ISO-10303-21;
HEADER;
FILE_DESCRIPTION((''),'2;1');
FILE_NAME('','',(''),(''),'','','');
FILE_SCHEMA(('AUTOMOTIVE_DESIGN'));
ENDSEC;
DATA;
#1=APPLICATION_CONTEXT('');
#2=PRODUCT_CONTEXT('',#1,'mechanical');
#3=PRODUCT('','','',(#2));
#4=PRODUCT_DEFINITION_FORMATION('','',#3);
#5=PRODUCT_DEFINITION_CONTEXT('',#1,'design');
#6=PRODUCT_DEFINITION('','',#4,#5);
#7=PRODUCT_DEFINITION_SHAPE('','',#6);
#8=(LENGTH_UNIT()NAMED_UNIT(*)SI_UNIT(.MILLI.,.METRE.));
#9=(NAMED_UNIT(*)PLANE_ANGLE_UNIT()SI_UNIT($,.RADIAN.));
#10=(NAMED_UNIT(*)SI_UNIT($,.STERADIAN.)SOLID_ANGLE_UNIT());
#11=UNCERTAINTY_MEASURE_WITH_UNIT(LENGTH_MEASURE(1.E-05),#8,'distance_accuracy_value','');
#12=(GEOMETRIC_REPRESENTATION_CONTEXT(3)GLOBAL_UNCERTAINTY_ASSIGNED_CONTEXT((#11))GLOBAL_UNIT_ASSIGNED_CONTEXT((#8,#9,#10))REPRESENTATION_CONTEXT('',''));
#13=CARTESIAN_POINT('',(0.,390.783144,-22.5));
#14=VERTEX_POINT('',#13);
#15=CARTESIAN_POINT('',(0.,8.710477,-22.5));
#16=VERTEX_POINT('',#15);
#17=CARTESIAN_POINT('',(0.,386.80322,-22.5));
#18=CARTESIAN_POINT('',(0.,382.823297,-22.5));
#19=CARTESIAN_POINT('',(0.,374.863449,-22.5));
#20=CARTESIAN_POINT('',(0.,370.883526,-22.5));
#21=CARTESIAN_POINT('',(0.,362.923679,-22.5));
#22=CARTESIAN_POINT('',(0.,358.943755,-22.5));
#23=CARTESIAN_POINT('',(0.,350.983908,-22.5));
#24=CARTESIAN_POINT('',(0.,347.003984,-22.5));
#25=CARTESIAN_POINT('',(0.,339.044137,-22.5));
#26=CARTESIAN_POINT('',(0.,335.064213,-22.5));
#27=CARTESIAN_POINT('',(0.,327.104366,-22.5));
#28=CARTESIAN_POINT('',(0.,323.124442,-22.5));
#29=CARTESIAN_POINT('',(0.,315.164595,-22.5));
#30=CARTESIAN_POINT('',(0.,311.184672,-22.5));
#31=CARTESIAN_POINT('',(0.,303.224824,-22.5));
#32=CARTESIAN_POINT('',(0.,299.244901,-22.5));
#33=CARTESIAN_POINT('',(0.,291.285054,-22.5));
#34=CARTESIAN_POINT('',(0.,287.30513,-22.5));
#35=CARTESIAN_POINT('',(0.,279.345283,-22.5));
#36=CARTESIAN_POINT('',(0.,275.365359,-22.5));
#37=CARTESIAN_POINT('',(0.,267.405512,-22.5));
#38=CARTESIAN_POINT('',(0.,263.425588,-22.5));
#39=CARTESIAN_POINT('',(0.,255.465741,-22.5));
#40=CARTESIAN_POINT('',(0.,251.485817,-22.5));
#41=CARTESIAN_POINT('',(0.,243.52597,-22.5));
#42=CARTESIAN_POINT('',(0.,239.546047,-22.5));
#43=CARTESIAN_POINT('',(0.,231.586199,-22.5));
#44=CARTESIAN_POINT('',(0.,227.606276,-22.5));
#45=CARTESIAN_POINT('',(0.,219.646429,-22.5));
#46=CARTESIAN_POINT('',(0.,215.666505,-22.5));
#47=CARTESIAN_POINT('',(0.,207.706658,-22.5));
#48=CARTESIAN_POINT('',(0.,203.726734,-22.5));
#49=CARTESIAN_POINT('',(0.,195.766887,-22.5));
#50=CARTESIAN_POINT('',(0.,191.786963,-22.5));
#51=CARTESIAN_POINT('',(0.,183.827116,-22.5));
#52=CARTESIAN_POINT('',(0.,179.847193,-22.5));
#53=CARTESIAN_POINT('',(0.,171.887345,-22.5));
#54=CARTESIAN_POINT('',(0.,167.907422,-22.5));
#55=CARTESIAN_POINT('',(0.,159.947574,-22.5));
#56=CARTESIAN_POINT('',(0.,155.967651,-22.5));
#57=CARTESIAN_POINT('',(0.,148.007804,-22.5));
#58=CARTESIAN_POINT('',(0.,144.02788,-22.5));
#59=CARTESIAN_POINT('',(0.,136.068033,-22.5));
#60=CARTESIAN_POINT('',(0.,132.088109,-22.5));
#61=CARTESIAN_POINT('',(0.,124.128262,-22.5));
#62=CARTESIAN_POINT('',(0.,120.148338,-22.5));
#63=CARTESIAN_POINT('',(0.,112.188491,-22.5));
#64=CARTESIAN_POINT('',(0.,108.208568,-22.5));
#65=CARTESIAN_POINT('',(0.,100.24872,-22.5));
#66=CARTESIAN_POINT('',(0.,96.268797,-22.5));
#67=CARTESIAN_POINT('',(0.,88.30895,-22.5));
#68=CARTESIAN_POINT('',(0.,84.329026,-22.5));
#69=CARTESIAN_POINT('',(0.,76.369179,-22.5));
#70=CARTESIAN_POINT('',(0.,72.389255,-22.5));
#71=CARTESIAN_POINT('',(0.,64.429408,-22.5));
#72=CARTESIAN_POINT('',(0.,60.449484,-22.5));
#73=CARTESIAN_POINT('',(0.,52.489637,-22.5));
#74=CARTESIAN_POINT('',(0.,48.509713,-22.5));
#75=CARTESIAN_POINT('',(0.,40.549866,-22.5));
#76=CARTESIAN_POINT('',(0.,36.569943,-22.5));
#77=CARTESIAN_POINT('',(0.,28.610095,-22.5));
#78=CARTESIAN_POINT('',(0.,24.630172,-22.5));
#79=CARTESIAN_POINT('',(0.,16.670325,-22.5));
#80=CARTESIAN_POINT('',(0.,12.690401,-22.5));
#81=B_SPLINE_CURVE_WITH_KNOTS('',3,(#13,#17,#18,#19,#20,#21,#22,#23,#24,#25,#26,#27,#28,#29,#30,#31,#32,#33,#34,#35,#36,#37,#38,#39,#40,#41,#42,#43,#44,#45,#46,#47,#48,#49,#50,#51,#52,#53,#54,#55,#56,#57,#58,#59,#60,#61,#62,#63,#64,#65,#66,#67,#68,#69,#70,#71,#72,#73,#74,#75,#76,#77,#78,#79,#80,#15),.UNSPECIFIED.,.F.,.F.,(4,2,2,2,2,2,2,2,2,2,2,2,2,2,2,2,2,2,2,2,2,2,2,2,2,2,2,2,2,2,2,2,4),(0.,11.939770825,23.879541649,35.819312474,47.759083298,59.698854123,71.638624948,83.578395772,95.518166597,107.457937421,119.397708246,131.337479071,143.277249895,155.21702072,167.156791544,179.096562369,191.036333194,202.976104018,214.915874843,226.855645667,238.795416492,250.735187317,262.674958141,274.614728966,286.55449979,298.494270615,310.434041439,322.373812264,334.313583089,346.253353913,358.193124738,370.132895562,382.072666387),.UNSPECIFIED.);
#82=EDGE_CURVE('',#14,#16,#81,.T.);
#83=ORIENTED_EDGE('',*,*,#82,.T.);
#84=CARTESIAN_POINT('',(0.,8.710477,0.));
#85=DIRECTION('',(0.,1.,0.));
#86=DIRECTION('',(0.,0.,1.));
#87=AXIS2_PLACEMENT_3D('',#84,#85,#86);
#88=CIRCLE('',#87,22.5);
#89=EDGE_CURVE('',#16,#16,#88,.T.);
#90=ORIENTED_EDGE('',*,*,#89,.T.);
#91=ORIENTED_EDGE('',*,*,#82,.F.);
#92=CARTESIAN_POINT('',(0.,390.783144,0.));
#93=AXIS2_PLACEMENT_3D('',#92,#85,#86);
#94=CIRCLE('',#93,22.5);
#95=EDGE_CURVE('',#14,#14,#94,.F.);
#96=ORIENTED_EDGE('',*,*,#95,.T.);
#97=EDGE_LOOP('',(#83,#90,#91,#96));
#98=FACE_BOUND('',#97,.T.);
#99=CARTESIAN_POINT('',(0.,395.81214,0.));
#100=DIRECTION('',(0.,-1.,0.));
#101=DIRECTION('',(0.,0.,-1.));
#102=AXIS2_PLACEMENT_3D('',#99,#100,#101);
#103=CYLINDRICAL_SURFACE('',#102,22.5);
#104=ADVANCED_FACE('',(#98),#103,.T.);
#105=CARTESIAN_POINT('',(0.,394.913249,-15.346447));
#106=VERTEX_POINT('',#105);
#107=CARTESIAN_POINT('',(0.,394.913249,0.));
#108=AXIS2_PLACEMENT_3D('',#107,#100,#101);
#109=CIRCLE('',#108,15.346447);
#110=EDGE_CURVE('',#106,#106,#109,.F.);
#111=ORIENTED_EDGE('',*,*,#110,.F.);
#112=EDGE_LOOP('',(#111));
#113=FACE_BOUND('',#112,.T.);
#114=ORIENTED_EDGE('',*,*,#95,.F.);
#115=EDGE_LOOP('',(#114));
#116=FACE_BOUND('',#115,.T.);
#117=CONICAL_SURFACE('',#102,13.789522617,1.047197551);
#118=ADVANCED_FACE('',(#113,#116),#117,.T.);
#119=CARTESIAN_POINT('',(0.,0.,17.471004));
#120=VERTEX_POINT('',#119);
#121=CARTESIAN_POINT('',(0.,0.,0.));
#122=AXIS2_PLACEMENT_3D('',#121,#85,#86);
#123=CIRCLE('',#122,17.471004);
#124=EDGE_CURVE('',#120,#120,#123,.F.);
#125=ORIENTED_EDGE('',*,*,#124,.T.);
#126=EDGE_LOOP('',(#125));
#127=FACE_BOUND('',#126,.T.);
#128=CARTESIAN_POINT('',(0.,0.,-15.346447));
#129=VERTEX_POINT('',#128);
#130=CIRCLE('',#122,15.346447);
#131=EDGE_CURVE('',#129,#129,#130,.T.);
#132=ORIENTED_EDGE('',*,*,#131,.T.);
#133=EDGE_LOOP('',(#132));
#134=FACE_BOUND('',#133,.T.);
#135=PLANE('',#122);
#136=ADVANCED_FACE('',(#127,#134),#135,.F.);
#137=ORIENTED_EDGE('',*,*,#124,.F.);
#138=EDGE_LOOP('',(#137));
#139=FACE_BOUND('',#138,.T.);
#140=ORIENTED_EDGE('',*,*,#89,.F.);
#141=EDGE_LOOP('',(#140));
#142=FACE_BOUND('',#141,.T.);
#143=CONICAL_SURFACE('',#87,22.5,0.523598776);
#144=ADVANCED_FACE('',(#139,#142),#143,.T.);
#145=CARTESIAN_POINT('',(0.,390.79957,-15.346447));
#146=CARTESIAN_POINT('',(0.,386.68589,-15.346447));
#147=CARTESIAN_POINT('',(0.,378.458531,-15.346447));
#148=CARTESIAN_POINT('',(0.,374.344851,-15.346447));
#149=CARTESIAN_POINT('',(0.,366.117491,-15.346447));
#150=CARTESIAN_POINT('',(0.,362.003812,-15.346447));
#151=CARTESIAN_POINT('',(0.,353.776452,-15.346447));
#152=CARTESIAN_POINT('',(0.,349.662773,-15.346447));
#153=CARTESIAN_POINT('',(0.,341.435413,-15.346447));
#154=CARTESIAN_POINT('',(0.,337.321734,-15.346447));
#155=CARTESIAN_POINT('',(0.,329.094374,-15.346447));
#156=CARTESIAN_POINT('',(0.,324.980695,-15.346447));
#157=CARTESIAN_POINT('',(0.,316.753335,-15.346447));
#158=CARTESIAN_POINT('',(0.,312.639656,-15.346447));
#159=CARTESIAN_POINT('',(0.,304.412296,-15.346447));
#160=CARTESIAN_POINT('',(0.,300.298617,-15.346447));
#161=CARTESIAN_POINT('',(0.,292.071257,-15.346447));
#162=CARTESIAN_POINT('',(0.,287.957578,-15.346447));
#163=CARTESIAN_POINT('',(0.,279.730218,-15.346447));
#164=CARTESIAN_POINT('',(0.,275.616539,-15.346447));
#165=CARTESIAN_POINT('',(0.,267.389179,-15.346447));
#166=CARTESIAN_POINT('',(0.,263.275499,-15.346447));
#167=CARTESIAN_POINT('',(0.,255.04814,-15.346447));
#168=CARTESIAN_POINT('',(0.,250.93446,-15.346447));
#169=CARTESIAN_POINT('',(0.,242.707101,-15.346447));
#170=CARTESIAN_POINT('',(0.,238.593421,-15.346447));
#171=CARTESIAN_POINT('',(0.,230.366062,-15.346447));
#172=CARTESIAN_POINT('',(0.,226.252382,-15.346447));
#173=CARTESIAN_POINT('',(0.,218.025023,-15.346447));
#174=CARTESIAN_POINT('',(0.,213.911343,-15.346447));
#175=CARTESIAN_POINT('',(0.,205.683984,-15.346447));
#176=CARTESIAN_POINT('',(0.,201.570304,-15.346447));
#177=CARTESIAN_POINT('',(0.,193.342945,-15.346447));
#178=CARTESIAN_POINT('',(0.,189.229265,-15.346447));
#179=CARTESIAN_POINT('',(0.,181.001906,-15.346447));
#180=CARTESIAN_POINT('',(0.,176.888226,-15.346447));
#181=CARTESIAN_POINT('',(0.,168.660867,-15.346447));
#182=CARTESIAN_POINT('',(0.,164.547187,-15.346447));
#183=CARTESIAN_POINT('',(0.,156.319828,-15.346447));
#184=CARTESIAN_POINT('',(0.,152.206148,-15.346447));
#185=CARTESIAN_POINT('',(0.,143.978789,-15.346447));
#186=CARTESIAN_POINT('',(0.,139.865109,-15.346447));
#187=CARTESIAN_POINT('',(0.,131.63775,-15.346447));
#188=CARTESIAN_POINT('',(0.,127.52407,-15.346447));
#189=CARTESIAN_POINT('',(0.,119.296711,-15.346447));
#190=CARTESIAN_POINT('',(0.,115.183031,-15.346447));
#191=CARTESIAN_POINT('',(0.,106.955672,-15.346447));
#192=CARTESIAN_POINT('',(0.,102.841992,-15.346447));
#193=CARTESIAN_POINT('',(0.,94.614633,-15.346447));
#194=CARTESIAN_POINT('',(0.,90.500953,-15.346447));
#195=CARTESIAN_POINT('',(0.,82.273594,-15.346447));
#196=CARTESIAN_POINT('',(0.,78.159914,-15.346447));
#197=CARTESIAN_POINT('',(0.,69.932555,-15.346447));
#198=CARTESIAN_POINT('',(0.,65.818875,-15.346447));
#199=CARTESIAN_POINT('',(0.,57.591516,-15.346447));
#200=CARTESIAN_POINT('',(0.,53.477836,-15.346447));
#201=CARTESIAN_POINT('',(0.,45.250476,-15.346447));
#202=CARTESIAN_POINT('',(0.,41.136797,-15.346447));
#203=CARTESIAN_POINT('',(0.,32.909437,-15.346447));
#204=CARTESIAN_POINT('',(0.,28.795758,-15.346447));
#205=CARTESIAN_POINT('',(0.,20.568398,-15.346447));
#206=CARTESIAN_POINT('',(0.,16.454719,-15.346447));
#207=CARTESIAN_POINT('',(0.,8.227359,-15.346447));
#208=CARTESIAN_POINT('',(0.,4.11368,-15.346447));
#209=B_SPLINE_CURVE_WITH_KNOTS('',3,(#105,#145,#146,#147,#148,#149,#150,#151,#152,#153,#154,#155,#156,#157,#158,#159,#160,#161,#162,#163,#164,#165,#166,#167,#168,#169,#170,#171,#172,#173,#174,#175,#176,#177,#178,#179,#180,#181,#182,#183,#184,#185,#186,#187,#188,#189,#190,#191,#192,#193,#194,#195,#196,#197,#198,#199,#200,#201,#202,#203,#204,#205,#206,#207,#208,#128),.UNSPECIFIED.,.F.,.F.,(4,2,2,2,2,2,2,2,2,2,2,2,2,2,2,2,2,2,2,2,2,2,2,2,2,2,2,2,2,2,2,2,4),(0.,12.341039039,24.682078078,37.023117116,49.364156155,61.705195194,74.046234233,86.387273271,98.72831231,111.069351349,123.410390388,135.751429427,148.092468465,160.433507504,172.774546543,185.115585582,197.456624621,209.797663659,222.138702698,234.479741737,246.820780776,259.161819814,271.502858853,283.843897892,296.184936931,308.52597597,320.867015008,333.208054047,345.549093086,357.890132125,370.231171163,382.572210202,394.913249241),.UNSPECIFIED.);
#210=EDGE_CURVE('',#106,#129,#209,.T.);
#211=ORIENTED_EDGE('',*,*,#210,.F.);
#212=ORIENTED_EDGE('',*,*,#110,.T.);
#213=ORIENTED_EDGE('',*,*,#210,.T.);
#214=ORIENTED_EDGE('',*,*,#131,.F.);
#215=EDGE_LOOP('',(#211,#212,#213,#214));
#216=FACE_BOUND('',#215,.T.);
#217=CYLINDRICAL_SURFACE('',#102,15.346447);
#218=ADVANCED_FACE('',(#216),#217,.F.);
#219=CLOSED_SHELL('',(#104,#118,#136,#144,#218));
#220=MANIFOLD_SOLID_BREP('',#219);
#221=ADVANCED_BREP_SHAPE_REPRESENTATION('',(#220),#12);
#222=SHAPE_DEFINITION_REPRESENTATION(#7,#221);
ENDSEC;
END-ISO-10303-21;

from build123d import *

# Parameters (mm, degrees)
SKETCH1_R           = 22.5
BOSS_EXTRUDE1_DEPTH = 395.81214
SKETCH2_R           = 15.346447484
CUT_EXTRUDE1_DEPTH  = 398.089096012
CHAMFER1_SIZE       = 5.028996
CHAMFER1_SIZE_2     = 8.710477


with BuildPart() as part:
    # Sketch1 → Boss-Extrude1 (new body)
    with BuildSketch(Plane(origin=(0, 0, 0), x_dir=(1, 0, 0), z_dir=(0, 1, 0))):
        with Locations(Location((0, 0, 0), (0, 0, 90))):
            Circle(SKETCH1_R)
    extrude(amount=BOSS_EXTRUDE1_DEPTH)

    # Sketch2 → Cut-Extrude1 (cut, through all)
    with BuildSketch(Plane(origin=(0, 0, 0), x_dir=(1, 0, 0), z_dir=(0, 1, 0))):
        with Locations(Location((0, 0, 0), (0, 0, 90))):
            Circle(SKETCH2_R)
    extrude(amount=CUT_EXTRUDE1_DEPTH, mode=Mode.SUBTRACT)

    # Chamfer1
    # the kernel refuses this chamfer: 8.710477, 5.028996 mm, written as the material it takes off along each edge
    with BuildSketch(Plane(origin=(0, 395.81214, 0), x_dir=(0, 0, -1), z_dir=(1, 0, 0))) as chamfer1_piece_1:
        Polygon((22.5, -CHAMFER1_SIZE), (22.5 - CHAMFER1_SIZE_2, 0), (22.5, 0), align=None)
    revolve(axis=Axis((0, 395.81214, 0), (0, 1, 0)), mode=Mode.SUBTRACT)
    with BuildSketch(Plane(origin=(0, 0, 0), x_dir=(0, 0, -1), z_dir=(1, 0, 0))) as chamfer1_piece_2:
        Polygon((22.5, CHAMFER1_SIZE_2), (22.5 - CHAMFER1_SIZE, 0), (22.5, 0), align=None)
    revolve(axis=Axis((0, 0, 0), (0, 1, 0)), mode=Mode.SUBTRACT)


solid = part.part
